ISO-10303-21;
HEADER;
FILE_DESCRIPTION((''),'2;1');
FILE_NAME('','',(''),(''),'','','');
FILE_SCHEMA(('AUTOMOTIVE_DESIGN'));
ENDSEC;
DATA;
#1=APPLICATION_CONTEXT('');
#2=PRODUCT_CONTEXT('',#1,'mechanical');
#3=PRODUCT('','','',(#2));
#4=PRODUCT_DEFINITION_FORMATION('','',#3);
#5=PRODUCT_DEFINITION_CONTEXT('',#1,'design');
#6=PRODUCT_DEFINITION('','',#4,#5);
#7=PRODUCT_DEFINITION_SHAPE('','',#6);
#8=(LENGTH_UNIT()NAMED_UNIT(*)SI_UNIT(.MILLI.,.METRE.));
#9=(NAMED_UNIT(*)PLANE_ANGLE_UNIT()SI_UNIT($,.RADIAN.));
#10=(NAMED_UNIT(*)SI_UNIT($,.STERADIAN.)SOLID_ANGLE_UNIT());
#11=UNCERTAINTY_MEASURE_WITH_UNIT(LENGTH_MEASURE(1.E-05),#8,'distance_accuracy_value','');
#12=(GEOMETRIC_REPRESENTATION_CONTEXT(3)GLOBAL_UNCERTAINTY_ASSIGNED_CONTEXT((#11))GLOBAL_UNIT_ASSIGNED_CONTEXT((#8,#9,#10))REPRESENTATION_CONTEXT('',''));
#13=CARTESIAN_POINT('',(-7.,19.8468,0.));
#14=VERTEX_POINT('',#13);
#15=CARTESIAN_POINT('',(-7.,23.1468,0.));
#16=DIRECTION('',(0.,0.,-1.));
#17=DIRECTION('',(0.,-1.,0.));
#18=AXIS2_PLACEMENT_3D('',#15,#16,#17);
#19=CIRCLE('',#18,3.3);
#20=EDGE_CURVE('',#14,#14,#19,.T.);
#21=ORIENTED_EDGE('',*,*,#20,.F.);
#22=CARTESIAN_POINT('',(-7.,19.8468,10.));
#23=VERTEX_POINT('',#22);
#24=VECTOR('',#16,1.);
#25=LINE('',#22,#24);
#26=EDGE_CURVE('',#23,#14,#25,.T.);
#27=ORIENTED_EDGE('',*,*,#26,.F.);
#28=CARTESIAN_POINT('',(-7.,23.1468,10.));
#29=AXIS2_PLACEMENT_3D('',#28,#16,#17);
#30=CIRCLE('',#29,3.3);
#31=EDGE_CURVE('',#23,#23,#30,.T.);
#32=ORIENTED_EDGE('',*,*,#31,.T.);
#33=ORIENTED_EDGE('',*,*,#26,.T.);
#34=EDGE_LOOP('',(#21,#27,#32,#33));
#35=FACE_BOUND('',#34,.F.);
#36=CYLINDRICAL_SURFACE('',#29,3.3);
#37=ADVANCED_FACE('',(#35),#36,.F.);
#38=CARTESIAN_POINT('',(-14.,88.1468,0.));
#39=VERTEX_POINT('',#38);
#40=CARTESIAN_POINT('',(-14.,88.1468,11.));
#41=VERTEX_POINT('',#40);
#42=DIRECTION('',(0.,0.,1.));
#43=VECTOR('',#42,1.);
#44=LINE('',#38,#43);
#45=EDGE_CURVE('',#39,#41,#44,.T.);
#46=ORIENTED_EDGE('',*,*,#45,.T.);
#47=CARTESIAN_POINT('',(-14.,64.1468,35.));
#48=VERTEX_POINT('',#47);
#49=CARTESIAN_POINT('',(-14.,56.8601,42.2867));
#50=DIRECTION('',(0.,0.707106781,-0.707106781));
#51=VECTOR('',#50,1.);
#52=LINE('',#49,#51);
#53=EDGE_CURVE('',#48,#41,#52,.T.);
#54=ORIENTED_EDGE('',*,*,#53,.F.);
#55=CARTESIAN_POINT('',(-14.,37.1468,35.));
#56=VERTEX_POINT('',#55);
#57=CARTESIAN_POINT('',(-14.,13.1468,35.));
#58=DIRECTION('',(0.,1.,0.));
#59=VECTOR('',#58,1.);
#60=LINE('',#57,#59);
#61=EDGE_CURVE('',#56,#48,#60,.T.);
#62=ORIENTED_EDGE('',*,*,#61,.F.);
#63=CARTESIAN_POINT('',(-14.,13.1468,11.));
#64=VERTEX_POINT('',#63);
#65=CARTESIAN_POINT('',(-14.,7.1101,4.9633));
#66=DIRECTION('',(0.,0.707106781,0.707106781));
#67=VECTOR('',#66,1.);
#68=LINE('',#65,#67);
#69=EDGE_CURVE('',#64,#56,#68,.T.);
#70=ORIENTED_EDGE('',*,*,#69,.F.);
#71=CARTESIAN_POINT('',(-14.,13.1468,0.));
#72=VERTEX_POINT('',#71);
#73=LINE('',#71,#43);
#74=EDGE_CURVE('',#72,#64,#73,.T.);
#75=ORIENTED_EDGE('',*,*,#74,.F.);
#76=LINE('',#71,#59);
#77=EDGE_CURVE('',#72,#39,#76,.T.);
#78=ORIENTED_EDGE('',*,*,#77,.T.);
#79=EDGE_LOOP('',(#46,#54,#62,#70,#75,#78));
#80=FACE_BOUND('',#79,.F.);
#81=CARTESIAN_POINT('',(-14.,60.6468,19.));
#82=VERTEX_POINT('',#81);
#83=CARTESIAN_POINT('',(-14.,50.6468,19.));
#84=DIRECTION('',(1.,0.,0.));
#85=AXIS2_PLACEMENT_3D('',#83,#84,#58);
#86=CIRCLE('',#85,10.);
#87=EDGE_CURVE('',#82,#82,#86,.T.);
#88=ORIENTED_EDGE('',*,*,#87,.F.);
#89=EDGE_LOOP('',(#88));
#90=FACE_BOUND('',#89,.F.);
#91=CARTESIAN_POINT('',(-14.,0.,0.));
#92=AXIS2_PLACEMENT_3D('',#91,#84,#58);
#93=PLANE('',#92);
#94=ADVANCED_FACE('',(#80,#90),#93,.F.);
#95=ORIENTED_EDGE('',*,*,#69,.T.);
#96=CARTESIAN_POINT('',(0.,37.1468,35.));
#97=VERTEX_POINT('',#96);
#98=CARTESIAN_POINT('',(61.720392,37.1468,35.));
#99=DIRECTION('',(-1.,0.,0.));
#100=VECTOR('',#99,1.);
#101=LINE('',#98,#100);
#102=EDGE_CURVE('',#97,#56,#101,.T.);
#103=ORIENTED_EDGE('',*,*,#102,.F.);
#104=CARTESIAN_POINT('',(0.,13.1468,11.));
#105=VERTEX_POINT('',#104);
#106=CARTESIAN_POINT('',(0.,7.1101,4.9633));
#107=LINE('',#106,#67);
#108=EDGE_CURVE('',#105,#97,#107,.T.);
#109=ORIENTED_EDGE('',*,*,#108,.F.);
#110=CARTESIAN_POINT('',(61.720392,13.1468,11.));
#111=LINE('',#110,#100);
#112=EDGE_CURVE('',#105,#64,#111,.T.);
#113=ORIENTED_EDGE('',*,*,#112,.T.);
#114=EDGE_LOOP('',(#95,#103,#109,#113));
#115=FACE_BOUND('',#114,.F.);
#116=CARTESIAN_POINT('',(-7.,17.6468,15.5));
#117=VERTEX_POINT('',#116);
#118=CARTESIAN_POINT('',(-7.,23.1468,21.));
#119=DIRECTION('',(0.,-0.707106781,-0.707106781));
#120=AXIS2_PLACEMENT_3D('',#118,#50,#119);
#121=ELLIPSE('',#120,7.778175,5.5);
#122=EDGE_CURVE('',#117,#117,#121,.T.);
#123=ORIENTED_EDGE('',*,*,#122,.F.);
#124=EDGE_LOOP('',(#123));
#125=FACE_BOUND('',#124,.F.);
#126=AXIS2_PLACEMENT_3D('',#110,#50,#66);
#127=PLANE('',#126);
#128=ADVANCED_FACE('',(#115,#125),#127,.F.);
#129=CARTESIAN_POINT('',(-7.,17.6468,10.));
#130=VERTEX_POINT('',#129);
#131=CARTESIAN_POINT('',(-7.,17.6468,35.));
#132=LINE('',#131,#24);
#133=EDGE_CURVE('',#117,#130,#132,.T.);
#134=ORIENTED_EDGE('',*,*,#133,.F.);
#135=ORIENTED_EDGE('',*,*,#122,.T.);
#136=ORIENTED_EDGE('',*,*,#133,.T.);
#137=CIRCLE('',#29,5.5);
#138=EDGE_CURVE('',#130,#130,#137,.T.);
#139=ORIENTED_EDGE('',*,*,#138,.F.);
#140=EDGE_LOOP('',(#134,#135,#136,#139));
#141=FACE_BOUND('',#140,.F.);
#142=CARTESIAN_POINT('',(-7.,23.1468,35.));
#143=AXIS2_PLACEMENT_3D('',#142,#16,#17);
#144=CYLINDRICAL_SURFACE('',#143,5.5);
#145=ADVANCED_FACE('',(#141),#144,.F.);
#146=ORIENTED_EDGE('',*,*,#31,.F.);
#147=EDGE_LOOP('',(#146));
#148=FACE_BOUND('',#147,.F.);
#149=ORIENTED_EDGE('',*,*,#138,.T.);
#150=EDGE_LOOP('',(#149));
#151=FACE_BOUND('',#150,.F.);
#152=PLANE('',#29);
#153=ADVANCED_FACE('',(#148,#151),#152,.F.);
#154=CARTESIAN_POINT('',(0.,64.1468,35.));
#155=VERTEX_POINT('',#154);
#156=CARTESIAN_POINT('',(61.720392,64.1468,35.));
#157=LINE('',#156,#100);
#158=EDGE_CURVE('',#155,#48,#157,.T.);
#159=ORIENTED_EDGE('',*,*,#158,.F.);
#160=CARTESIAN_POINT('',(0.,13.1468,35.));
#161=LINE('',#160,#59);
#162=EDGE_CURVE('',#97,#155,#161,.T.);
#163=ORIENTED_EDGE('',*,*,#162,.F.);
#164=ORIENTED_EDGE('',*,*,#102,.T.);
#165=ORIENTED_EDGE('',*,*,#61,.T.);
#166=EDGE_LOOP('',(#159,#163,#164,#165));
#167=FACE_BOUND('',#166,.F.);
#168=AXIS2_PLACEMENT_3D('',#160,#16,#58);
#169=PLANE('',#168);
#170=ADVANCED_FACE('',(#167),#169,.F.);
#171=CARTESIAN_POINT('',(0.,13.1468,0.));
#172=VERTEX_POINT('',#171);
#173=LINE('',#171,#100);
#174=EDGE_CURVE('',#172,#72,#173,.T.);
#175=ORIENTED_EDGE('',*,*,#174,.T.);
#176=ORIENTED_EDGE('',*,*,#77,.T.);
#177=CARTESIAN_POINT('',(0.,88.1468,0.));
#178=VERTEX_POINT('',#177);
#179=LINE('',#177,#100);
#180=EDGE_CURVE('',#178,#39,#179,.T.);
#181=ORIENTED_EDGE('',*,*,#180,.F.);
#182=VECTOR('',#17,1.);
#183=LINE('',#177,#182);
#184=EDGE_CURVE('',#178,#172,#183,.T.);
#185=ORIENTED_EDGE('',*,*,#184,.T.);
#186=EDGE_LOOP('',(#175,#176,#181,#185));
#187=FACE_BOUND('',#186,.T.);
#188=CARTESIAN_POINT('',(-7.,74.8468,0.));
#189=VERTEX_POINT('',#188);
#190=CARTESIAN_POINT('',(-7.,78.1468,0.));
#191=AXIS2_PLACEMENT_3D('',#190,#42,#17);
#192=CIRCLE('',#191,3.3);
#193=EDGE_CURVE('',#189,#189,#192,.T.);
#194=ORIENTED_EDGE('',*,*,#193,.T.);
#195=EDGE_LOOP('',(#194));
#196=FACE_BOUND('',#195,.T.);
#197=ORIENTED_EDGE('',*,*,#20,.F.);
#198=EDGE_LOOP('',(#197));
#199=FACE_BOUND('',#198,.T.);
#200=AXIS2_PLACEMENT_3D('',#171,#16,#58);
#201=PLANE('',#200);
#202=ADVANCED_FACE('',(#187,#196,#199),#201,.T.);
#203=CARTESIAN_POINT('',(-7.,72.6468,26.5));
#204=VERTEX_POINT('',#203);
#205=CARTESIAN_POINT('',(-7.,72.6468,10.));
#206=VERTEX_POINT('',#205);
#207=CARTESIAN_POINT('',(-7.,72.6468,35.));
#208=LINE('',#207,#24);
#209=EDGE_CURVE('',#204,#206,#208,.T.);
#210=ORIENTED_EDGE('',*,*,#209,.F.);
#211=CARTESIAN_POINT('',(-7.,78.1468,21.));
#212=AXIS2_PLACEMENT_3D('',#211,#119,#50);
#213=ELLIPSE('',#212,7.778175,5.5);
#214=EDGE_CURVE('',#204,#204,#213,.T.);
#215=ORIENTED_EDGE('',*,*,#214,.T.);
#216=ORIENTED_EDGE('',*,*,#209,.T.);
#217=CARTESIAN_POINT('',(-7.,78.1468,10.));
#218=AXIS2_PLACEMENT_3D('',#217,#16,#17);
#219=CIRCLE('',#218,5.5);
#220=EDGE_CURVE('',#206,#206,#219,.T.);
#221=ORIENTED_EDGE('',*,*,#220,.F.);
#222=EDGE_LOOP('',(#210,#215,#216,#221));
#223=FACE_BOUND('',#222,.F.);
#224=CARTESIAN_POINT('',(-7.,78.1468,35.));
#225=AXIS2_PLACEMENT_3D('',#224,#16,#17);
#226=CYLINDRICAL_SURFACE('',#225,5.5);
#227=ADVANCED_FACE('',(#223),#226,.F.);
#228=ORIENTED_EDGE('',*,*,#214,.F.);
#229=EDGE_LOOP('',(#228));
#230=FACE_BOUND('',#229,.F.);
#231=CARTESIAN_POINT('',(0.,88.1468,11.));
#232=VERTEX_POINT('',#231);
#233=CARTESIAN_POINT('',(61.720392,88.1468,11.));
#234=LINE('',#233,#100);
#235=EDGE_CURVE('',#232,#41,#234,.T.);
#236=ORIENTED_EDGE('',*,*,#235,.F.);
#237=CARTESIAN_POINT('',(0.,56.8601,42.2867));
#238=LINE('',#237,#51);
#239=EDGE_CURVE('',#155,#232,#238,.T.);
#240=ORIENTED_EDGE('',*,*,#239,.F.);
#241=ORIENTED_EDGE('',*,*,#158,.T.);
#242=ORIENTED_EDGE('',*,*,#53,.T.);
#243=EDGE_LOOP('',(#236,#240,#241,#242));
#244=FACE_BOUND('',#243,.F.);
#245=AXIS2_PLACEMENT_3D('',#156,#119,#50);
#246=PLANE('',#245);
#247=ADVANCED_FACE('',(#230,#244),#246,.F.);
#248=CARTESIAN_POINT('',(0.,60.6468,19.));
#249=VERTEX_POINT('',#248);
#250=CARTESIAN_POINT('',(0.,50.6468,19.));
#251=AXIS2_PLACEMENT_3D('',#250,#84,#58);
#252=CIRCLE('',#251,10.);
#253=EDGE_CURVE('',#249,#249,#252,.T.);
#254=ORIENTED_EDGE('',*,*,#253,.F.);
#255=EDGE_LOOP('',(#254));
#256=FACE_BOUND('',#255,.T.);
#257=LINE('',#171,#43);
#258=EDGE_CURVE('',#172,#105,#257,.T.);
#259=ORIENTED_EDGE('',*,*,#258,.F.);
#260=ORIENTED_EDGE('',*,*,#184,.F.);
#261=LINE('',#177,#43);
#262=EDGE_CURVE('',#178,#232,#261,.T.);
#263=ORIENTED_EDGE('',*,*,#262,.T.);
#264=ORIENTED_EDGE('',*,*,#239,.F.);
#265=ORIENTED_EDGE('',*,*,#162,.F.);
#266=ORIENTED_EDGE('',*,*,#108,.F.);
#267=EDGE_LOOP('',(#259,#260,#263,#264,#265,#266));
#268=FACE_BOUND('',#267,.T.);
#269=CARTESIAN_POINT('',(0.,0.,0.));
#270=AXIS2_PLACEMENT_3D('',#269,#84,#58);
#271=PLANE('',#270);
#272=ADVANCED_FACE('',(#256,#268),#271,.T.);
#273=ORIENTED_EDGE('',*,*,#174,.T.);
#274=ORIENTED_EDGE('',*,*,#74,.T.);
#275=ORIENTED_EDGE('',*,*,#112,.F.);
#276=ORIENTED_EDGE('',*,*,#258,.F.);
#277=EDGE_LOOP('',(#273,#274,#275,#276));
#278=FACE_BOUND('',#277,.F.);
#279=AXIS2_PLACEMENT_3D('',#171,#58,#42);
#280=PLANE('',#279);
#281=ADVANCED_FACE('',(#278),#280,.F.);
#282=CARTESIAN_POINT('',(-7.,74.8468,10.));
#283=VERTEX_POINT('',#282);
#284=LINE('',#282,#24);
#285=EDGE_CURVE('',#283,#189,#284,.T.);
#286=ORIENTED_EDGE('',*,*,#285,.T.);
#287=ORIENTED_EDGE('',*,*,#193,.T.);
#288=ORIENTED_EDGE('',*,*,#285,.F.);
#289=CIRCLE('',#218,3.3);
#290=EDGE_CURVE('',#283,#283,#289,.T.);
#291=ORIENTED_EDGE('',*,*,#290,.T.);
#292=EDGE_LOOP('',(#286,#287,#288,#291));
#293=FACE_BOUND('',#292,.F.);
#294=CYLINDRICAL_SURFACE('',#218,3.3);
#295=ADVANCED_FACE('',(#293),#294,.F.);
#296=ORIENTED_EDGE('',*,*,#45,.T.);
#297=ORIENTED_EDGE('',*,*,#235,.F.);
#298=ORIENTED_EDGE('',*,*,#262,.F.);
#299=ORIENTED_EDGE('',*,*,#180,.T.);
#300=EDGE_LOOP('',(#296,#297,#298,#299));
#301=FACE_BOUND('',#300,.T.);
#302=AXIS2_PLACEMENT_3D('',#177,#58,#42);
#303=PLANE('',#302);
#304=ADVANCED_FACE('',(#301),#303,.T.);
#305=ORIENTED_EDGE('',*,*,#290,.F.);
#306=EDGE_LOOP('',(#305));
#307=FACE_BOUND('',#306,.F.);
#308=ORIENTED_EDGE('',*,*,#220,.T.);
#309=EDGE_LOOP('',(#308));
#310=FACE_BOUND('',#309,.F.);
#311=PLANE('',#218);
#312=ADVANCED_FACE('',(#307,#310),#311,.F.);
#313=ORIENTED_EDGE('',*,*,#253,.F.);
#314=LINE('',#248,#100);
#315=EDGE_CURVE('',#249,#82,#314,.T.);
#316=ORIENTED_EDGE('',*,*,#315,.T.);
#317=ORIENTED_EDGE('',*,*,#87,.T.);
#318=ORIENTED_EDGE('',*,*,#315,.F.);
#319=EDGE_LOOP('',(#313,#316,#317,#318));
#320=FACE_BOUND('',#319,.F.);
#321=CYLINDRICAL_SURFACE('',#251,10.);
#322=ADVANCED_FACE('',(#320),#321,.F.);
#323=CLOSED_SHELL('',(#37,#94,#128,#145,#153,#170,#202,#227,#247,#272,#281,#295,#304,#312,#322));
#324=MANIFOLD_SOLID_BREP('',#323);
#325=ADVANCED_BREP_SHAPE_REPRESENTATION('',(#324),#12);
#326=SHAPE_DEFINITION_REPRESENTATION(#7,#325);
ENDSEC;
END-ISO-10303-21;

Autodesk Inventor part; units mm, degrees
ref_plane "YZ Plane" through (0, 0, 0) normal (1, 0, 0) x (0, 1, 0)
ref_plane "XZ Plane" through (0, 0, 0) normal (0, 1, 0) x (-1, 0, 0)
ref_plane "XY Plane" through (0, 0, 0) normal (0, 0, 1) x (1, 0, 0)
sketch "Sketch1" plane through (0, 0, 0) normal (0, 0, 1) x (1, 0, 0)
  point P0 (0, 0)
sketch "Sketch2" plane through (0, 0, 0) normal (1, 0, 0) x (0, 1, 0)
  line L0 (13.1468, 0) -> (76.0129, 0) projected
  line L1 (13.1468, 0) -> (88.1468, 0)
  circle A0 centre (50.6468, 19) radius 10
  line L2 (13.1468, 35) -> (88.1468, 35)
  line L3 (13.1468, 0) -> (13.1468, 35)
  line L4 (88.1468, 0) -> (88.1468, 35)
  point P0 (0, 0)
  point P1 (90.0129, 0)
  dimension "d0" = 75
  dimension "d1" = 20
  dimension "d3" = 16
  dimension "d5" = 35
  dimension "d8" = 37.5
extrude "Extrusion1" add sketch "Sketch2" against normal blind 14
sketch "Sketch3" plane through (0, 13.1468, 35) normal (0, 0, 1) x (1, 0, 0)
  line L0 (0, 75) -> (0, 0) projected
  line L1 (0, 75) -> (-14, 75) projected
  line L2 (-14, 0) -> (-14, 75) projected
  line L3 (0, 0) -> (-14, 0) projected
  line L4 (0, 75) -> (0, 0) projected
  line L5 (0, 37.5) -> (-14, 37.5)
  point P0 (0, -13.1468)
  point P1 (-7, 10)
  point P2 (-7, 65)
  dimension "d12" = 7
  dimension "d13" = 14
  dimension "d14" = 10
hole "Hole1" at (-7, 23.1468, 35) at (-7, 78.1468, 35) direction (0, 0, -1) diameter 6.6 end through all counterbore diameter 11 counterbore depth 25 clearance for "Socket Head Cap Screw ISO 4762" size "M6" standard "ISO"
chamfer "Chamfer1" distance 24 angle 45 2 edges at (-7, 13.1468, 35) (-7, 88.1468, 35)
equation "\"d8\" = 0.5 * d0"
equation "\"d12\" = 0.5 * d13"
properties part number "Glidelejrehus" material "Steel, Galvanized"
